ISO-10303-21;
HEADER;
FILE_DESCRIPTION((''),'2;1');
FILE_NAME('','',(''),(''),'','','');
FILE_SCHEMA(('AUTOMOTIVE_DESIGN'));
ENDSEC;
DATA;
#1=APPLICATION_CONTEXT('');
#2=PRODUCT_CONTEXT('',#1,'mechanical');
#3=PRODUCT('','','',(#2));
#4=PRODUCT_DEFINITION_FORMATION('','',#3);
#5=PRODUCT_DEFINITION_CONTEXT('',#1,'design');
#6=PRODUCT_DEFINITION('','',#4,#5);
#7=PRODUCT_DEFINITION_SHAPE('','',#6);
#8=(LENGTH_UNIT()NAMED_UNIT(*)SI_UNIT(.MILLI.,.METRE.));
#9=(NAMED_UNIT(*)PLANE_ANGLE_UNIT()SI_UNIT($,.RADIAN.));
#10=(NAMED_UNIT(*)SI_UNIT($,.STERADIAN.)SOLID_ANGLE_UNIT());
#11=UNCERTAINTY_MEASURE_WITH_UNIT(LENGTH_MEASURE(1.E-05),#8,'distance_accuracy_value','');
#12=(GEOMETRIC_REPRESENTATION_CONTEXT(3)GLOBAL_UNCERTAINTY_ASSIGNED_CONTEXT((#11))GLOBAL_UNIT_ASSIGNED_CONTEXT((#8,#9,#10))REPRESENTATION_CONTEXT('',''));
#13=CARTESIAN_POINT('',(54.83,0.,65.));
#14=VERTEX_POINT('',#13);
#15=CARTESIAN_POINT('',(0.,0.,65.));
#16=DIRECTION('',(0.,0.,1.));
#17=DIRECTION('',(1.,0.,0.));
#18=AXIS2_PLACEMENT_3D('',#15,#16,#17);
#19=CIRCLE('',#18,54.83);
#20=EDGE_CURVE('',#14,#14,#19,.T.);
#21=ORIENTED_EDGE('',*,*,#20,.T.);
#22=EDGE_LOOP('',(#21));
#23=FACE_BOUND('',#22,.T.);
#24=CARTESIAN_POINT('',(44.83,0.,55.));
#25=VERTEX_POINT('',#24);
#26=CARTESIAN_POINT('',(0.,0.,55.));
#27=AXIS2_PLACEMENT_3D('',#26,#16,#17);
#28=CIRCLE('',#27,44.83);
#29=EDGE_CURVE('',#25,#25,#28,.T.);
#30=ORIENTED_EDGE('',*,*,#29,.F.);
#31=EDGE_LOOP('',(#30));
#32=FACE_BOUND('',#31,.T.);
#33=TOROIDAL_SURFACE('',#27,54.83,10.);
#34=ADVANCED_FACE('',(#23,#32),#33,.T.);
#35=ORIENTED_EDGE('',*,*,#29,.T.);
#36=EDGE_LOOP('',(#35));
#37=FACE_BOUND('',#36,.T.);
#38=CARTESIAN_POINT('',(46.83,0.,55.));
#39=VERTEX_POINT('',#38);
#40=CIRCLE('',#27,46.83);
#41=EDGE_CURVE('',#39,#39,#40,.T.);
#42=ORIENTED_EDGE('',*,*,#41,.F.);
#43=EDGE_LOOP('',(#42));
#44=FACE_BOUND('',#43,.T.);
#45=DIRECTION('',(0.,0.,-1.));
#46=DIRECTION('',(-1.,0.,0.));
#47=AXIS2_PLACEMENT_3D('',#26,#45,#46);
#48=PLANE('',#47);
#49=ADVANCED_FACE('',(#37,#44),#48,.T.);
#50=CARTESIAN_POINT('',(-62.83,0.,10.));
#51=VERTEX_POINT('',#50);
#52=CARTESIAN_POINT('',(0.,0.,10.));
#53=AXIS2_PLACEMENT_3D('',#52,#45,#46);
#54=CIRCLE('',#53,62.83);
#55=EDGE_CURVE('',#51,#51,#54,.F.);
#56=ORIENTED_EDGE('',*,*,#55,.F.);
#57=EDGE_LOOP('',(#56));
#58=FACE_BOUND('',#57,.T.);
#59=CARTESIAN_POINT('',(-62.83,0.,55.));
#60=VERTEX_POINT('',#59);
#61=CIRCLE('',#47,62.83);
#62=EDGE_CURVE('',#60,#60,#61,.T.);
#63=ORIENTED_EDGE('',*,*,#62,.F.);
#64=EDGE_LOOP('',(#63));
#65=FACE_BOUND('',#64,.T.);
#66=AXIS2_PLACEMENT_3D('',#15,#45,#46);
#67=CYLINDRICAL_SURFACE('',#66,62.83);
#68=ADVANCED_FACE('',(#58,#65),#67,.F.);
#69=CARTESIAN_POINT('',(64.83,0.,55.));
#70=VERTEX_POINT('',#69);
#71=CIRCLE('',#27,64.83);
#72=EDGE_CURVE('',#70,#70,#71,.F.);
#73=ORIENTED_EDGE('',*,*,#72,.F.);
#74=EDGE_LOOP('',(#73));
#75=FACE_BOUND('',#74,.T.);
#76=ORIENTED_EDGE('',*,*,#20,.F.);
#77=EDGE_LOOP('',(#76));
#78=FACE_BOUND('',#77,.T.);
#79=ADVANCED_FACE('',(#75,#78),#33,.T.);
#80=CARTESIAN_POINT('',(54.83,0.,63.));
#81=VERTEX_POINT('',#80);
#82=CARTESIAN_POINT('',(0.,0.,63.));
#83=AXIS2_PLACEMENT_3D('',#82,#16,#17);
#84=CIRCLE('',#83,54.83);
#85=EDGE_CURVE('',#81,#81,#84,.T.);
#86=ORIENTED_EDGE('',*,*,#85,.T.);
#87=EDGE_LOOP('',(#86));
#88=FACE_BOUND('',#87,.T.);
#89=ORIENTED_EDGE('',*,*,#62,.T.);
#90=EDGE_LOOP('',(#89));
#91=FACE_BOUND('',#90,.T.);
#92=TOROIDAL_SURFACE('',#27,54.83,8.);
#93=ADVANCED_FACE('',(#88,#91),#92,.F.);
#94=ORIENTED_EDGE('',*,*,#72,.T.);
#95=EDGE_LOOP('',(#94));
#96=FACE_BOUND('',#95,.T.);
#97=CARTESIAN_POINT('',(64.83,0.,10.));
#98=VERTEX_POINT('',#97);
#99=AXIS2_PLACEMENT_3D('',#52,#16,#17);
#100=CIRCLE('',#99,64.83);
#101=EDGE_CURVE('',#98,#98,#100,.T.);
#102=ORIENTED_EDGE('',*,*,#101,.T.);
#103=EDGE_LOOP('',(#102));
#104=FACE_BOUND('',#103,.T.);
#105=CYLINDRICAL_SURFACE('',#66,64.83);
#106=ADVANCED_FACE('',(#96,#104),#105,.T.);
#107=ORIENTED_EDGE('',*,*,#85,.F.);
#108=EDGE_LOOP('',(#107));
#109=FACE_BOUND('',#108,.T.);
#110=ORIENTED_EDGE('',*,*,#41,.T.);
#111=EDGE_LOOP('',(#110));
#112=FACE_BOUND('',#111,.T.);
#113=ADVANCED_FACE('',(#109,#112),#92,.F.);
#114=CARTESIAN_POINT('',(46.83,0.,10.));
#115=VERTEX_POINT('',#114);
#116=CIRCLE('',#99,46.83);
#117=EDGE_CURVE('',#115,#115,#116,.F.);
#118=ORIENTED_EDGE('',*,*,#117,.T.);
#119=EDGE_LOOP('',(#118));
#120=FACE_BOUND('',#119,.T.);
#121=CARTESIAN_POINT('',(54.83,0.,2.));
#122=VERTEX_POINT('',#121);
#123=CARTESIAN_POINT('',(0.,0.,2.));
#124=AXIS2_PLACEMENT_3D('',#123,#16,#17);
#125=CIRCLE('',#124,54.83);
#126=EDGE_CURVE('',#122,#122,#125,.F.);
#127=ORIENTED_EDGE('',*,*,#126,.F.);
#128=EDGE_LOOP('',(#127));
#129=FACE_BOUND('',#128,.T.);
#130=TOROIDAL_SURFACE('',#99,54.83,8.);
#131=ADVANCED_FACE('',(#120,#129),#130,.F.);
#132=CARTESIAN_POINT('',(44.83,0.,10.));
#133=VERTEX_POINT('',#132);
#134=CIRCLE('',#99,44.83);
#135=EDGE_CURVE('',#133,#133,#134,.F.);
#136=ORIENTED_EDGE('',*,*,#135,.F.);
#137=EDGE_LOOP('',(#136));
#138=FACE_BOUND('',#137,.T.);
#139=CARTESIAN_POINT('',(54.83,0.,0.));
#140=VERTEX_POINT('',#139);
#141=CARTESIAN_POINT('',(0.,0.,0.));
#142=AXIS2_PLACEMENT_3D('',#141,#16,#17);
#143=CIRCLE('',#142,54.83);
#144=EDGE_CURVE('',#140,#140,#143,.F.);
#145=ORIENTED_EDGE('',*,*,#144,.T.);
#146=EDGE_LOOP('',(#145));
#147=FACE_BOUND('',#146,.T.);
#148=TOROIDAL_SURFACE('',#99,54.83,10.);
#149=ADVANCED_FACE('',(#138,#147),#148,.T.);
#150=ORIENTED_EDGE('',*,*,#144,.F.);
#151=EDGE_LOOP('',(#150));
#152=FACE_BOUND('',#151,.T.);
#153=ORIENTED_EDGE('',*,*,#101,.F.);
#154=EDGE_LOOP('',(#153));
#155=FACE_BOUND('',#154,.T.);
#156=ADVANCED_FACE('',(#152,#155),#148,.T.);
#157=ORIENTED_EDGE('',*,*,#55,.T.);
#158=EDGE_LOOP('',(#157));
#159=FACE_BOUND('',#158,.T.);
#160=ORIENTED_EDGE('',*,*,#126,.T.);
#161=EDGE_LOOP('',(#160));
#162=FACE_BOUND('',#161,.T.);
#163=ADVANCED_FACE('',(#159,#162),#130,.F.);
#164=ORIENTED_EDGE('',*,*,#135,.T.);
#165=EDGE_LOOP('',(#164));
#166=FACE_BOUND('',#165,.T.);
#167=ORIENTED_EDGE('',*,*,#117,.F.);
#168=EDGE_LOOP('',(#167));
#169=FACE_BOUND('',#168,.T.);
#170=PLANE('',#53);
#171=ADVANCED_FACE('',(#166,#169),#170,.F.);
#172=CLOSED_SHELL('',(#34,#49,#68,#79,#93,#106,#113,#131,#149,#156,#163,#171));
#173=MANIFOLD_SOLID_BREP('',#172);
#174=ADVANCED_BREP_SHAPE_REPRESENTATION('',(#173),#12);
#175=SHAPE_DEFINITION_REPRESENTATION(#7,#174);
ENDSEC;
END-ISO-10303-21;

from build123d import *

# Parameters (mm, degrees)
SKETCH2_R           = 64.83
SKETCH2_R_2         = 44.83
EXTRUDE_THIN1_DEPTH = 65
FILLET1_R           = 10
FILLET2_R           = 10
FILLET3_R           = 10
FILLET4_R           = 10


# Read off the part's stored shape, not the designer's step: Shell1
with BuildPart() as part:
    # Sketch2 → Extrude-Thin1 (new body)
    with BuildSketch(Plane.XY):
        Circle(SKETCH2_R)
        Circle(SKETCH2_R_2, mode=Mode.SUBTRACT)
    extrude(amount=EXTRUDE_THIN1_DEPTH)

    # Fillet1
    fillet1_edges = [part.edges().sort_by_distance(p)[0] for p in [
        (-64.83, 0, 65),
    ]]
    fillet(fillet1_edges, radius=FILLET1_R)

    # Fillet2
    fillet2_edges = [part.edges().sort_by_distance(p)[0] for p in [
        (-64.83, 0, 0),
    ]]
    fillet(fillet2_edges, radius=FILLET2_R)

    # Fillet3
    fillet3_edges = [part.edges().sort_by_distance(p)[0] for p in [
        (-44.83, 0, 0),
    ]]
    fillet(fillet3_edges, radius=FILLET3_R - 0.0001)  # a hair under: the kernel refuses the full size

    # Fillet4
    fillet4_edges = [part.edges().sort_by_distance(p)[0] for p in [
        (-44.83, 0, 65),
    ]]
    fillet(fillet4_edges, radius=FILLET4_R - 0.0001)  # a hair under: the kernel refuses the full size

    # Shell1 outline → Shell1 (revolve, cut)
    with BuildSketch(Plane.XZ):
        with BuildLine():
            Line((44.83, 55), (44.83, 10))
            Line((44.83, 10), (46.83, 10))
            ThreePointArc((46.83, 10), (49.173145751, 4.343145751), (54.83, 2))
            ThreePointArc((54.83, 2), (60.486854249, 4.343145751), (62.83, 10))
            Line((62.83, 10), (62.83, 55))
            ThreePointArc((62.83, 55), (60.486854249, 60.656854249), (54.83, 63))
            ThreePointArc((54.83, 63), (49.173145751, 60.656854249), (46.83, 55))
            Line((46.83, 55), (44.83, 55))
        make_face()
    revolve(axis=Axis((0, 0, 0), (0, 0, 1)), mode=Mode.SUBTRACT)


solid = part.part
